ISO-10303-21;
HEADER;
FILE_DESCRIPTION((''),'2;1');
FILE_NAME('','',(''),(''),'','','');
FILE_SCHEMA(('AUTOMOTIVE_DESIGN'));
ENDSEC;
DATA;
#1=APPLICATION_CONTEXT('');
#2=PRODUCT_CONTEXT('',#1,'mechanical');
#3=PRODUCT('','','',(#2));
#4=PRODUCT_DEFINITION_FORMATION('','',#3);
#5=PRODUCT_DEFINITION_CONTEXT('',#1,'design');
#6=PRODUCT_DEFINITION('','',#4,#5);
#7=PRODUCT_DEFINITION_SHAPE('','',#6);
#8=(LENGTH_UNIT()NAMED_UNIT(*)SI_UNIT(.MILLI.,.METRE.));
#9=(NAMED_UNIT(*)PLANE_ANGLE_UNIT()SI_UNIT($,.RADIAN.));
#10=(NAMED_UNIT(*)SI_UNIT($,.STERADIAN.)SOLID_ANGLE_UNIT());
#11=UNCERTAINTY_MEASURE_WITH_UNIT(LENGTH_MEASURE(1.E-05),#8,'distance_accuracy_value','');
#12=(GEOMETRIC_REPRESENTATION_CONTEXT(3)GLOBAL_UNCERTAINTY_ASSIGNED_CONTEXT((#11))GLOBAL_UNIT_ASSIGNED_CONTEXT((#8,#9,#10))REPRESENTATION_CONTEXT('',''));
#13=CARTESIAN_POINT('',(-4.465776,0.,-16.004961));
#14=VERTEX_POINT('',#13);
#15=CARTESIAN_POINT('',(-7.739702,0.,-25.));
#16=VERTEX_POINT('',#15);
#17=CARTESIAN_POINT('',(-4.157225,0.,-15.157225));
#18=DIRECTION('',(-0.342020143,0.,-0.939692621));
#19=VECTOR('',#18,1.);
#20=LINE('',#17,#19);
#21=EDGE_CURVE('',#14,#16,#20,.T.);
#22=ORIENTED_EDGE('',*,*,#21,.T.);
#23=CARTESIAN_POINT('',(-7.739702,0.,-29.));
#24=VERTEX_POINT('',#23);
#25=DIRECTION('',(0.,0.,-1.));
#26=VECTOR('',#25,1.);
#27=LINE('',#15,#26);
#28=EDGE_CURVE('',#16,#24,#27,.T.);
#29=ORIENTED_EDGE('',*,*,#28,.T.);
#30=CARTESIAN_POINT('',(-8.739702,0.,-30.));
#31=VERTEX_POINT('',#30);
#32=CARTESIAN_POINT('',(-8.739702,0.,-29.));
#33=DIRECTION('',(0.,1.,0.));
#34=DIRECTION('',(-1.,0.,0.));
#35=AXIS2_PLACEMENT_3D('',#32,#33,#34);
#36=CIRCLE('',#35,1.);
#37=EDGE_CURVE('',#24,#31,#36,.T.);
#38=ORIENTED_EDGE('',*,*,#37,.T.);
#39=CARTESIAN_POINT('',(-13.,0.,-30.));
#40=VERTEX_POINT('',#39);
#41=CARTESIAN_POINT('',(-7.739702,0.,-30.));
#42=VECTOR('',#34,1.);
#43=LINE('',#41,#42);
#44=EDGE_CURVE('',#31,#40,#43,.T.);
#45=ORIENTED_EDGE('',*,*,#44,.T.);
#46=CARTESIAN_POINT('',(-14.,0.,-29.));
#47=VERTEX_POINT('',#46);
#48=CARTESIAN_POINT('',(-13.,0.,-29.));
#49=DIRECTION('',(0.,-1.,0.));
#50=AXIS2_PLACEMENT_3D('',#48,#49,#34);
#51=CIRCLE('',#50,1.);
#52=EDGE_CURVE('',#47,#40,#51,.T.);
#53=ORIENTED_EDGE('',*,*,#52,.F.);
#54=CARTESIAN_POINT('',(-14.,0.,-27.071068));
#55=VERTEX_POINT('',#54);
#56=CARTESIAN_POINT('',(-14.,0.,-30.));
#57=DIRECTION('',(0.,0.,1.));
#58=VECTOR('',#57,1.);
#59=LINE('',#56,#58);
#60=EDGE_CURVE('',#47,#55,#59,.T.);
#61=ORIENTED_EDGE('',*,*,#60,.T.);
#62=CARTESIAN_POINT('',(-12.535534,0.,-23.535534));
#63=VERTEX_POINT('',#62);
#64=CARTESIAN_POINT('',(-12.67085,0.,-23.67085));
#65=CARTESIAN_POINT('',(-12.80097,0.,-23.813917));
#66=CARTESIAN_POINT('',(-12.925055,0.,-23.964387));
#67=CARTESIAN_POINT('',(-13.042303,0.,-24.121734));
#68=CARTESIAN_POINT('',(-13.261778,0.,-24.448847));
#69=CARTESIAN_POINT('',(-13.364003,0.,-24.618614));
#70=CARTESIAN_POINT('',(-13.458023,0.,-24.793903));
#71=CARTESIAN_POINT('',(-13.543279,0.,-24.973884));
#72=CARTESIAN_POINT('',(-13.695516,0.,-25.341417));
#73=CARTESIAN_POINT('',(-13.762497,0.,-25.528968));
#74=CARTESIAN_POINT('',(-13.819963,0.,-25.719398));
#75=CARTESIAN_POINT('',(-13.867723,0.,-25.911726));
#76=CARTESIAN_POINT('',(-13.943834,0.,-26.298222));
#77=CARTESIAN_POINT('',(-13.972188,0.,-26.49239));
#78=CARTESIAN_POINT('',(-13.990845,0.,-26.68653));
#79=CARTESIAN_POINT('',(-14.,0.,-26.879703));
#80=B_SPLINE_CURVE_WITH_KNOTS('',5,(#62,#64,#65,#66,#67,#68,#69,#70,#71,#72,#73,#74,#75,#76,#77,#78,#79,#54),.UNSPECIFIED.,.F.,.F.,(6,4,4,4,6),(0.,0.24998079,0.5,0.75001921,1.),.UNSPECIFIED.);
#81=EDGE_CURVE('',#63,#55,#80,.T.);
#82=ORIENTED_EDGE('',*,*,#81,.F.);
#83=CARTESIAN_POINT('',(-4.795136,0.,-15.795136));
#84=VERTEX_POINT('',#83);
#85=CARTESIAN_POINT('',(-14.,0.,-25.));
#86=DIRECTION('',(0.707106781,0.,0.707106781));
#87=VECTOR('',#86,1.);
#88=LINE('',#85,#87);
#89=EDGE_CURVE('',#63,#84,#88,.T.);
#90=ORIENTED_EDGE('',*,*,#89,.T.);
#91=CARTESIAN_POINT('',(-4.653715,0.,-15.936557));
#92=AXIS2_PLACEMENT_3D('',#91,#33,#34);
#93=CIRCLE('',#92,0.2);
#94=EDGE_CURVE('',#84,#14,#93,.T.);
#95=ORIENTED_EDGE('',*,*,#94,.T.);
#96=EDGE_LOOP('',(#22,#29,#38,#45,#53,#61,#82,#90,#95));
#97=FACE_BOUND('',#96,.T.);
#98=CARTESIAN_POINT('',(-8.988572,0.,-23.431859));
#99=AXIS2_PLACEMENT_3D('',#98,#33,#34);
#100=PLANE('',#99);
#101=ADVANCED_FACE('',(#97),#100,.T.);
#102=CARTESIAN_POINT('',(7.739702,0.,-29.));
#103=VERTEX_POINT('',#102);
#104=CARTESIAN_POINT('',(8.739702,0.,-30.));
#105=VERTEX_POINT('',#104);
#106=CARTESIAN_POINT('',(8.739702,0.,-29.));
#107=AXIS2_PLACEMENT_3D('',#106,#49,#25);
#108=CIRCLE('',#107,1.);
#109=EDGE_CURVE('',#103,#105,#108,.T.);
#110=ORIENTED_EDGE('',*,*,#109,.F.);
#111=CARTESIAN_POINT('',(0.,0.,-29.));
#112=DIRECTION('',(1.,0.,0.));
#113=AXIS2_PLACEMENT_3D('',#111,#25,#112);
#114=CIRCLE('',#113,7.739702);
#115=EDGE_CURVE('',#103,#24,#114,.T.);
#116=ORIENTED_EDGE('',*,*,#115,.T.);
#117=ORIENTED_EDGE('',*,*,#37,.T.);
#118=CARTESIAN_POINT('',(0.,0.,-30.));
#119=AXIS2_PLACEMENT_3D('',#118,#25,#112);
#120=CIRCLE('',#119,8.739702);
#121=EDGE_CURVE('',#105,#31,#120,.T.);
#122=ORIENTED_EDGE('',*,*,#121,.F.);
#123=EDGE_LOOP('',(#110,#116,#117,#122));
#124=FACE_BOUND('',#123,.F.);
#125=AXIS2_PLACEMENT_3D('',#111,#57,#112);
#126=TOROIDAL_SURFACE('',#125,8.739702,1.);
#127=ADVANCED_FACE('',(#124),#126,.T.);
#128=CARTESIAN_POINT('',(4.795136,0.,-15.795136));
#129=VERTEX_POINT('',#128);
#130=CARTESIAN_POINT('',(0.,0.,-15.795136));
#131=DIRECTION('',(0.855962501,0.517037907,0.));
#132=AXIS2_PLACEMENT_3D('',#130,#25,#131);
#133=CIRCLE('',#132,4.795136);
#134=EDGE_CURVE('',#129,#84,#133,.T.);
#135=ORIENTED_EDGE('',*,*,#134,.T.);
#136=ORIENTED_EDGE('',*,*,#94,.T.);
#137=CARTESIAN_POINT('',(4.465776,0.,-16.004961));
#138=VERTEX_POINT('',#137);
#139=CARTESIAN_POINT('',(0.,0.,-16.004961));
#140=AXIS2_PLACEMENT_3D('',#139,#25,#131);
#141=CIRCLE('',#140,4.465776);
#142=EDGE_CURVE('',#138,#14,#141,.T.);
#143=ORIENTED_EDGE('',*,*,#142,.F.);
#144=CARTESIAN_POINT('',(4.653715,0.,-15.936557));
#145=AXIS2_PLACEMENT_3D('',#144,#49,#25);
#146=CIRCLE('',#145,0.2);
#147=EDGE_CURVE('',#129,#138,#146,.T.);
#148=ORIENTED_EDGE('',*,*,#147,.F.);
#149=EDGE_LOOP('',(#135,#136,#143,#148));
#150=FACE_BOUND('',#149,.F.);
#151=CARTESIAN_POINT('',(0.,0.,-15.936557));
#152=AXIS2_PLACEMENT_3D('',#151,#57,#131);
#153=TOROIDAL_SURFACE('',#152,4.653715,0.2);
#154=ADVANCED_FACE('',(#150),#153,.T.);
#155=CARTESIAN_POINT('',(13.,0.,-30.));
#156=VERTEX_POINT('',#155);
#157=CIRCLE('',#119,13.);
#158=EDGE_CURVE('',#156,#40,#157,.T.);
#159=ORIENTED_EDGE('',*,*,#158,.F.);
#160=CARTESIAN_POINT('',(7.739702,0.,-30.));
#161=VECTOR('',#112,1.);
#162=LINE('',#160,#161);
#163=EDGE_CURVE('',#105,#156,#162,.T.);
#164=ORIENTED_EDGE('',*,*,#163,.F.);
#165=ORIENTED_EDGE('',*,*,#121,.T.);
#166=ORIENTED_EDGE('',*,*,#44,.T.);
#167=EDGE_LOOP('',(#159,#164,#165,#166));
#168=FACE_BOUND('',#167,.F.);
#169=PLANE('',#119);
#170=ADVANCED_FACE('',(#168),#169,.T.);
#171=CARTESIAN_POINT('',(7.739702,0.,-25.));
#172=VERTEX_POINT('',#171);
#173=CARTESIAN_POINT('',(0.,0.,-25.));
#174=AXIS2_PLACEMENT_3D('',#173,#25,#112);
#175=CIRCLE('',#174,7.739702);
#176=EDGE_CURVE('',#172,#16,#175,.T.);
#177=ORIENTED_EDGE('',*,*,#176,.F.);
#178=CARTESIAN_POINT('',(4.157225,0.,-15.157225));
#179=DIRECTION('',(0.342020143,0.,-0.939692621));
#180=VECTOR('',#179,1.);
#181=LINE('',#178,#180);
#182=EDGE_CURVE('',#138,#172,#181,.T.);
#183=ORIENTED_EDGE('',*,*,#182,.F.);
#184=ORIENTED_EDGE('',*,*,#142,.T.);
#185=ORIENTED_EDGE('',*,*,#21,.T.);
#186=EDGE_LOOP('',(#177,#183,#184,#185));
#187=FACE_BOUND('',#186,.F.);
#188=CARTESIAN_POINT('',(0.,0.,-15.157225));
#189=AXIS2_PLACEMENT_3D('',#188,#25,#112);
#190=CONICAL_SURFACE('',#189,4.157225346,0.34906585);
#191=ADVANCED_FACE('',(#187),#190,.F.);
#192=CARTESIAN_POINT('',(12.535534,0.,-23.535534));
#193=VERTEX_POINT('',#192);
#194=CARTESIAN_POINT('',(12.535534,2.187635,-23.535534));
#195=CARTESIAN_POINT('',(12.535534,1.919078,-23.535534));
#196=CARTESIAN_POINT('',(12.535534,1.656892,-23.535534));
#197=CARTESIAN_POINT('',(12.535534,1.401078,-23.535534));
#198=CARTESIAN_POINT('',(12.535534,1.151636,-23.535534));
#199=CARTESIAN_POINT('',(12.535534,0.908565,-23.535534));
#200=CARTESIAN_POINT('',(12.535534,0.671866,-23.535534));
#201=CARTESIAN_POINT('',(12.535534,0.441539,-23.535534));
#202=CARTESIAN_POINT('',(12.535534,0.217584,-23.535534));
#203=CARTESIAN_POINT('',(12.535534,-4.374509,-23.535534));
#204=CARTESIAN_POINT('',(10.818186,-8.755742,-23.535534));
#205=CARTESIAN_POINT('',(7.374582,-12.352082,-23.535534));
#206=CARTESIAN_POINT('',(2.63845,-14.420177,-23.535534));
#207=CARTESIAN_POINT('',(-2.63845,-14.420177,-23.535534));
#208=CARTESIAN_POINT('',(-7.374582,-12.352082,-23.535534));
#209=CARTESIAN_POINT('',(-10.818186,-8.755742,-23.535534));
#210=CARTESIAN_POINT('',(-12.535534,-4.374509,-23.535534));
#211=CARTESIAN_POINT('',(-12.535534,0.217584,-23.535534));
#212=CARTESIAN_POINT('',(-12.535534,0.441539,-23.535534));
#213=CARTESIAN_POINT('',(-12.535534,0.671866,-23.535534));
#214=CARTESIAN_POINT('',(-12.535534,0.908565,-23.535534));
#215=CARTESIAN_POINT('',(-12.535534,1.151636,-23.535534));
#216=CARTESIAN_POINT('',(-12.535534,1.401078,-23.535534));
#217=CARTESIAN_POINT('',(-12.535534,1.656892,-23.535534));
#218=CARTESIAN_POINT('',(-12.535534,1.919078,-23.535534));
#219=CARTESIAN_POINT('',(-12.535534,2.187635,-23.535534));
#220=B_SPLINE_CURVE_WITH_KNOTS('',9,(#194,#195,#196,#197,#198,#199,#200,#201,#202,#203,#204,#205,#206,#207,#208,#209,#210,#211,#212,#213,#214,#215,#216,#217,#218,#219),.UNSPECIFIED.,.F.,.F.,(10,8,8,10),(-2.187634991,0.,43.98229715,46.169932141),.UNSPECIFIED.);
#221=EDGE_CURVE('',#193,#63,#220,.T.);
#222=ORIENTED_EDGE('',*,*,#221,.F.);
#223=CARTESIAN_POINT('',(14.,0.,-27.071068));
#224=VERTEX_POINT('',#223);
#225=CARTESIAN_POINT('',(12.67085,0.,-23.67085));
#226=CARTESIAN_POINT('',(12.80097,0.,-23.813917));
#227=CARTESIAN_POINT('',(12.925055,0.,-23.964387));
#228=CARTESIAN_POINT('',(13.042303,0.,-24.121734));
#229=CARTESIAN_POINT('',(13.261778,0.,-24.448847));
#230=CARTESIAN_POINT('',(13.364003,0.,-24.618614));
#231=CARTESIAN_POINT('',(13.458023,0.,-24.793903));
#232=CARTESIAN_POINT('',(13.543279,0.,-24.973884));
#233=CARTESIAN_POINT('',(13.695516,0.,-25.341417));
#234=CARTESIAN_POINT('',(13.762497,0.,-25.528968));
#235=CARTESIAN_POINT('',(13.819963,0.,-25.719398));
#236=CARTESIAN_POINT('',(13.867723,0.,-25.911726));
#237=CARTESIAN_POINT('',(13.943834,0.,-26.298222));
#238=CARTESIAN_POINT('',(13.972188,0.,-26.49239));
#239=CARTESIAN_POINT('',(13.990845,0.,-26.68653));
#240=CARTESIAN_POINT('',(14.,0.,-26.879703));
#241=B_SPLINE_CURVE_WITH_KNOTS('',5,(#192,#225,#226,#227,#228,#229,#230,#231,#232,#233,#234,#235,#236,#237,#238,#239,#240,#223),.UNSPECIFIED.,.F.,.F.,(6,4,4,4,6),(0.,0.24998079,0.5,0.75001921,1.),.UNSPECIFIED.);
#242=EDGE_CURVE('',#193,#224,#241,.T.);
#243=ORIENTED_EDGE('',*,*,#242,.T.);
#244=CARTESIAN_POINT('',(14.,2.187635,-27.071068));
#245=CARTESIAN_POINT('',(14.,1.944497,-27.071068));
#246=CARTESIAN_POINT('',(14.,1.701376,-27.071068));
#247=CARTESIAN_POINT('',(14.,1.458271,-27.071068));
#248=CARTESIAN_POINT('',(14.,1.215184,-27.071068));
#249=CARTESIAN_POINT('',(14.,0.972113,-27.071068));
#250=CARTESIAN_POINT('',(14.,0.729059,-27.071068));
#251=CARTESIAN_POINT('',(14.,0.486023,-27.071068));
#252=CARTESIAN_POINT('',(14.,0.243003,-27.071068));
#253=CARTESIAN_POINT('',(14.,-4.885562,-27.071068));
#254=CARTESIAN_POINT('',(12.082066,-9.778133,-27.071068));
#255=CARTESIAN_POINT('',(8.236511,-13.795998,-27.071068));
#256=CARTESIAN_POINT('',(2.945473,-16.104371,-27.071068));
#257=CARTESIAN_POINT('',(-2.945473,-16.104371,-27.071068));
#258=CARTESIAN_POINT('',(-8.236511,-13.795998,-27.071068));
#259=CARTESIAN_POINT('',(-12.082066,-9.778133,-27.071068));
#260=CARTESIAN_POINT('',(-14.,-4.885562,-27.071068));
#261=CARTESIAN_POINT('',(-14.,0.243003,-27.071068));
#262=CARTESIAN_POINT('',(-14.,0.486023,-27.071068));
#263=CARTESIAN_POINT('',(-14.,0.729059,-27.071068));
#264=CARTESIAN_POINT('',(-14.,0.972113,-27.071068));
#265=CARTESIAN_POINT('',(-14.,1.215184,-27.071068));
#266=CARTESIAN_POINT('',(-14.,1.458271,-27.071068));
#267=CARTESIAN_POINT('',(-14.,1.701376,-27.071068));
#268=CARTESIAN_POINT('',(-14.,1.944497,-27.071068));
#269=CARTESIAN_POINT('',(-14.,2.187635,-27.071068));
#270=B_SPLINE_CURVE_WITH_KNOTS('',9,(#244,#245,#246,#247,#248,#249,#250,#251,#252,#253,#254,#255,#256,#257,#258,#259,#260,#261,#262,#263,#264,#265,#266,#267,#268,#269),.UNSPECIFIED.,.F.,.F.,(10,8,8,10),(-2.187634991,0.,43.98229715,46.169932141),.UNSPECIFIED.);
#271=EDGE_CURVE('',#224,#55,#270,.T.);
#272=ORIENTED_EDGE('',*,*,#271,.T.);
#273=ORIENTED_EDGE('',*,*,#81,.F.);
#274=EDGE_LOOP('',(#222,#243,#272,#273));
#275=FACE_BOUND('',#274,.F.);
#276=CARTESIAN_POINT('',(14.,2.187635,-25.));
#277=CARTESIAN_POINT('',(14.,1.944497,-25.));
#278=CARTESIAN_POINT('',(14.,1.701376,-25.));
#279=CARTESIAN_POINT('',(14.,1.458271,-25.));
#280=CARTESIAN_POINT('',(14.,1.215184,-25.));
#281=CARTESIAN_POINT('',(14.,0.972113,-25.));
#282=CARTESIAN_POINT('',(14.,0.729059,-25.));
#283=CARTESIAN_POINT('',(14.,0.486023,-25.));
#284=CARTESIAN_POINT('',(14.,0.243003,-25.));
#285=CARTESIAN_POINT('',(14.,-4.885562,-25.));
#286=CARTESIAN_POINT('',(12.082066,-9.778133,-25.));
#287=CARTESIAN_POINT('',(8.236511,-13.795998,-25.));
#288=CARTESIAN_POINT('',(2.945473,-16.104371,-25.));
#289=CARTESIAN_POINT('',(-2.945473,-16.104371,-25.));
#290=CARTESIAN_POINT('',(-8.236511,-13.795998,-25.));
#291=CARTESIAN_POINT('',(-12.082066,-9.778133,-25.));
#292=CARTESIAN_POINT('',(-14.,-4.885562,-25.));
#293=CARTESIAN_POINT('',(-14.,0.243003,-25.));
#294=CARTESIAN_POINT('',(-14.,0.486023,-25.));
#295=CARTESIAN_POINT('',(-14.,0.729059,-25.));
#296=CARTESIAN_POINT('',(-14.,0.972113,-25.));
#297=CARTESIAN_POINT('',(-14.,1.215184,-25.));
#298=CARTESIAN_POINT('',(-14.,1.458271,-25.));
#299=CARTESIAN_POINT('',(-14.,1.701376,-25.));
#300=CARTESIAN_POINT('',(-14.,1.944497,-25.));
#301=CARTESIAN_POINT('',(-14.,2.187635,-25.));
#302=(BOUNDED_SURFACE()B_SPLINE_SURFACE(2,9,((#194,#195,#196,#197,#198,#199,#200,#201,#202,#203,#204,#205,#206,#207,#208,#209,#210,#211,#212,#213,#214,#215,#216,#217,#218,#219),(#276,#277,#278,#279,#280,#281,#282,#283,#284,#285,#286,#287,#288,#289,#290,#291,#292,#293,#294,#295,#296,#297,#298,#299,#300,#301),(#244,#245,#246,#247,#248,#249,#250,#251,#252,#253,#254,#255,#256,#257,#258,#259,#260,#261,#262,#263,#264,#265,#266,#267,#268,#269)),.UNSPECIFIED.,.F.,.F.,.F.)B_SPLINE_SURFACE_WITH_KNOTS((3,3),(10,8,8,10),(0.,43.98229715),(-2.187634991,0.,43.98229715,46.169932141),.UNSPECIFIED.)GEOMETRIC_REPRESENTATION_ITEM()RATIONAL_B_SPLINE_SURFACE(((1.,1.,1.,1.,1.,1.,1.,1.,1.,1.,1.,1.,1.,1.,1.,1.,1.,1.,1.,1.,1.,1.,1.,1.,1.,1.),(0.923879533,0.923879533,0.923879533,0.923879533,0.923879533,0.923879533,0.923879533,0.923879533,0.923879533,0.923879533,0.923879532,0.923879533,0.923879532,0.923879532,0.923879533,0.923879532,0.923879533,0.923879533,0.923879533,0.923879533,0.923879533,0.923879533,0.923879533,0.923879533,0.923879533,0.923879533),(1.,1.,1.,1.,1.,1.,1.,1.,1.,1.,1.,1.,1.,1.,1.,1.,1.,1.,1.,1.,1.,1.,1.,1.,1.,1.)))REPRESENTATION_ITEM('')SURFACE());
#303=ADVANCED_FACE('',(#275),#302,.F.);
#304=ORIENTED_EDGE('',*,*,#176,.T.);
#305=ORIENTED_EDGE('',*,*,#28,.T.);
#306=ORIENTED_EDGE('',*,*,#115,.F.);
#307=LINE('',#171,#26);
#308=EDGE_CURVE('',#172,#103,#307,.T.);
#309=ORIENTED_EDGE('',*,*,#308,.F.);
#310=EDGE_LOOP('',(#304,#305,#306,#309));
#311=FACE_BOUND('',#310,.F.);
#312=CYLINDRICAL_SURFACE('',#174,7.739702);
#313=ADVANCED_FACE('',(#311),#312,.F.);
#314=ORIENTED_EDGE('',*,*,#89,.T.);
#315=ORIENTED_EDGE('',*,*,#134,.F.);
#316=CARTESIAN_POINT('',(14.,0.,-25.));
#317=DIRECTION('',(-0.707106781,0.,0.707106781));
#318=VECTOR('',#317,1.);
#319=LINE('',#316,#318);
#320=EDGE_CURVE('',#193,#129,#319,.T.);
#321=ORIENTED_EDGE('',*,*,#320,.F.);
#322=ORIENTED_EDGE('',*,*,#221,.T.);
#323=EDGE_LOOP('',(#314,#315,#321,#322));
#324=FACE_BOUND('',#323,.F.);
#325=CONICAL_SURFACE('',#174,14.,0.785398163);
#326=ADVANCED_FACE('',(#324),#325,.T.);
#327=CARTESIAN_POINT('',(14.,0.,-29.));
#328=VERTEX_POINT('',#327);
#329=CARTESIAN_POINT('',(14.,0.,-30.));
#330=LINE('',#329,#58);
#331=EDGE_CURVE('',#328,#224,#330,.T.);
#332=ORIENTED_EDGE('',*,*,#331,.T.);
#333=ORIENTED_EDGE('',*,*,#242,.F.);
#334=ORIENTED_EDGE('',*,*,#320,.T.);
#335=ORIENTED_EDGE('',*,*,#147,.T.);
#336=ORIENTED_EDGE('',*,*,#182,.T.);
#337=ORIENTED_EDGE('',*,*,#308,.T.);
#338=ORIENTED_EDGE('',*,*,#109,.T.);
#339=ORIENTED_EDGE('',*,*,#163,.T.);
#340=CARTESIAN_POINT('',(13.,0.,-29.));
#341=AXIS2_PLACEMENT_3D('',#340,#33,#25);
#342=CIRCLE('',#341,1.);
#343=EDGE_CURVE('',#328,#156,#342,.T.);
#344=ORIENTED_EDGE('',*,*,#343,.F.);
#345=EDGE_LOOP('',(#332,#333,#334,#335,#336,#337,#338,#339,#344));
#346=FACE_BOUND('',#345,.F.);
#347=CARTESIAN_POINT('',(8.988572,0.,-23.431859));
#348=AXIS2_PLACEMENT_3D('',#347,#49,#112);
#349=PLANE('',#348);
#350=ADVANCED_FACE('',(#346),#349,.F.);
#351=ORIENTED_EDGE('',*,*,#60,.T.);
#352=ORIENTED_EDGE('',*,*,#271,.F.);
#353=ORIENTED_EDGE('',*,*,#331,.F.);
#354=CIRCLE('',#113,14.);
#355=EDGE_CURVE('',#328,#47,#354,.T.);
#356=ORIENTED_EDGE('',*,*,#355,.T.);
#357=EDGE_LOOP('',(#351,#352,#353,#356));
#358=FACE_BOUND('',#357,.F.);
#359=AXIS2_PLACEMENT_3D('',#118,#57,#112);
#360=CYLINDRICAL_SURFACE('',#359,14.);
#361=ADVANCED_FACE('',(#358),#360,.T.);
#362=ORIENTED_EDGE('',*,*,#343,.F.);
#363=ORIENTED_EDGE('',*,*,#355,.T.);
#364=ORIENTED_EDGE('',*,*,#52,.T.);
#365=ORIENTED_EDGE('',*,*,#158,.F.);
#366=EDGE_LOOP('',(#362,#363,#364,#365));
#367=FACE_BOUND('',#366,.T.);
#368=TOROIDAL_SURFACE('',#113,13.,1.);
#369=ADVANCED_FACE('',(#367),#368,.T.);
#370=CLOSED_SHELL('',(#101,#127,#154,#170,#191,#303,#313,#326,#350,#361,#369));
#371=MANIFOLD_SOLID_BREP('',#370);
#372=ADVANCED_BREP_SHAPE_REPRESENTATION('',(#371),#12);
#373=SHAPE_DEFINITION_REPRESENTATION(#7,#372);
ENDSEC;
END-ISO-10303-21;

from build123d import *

# Parameters (mm, degrees)
F1_ANGLE    = 180
F2_R        = 5
F3_R        = 1
F4_T2_ANGLE = 242.2675380927


# Not quite as in the source:
# - a fillet or chamfer that OpenCascade refuses, or shapes differently, is made with other operations: its cross-section is extruded or revolved along the edge and cut away or added


with BuildPart() as f1:
    # F0 (on Front) → F1 (revolve)
    with BuildSketch(Plane.XZ):
        Polygon((14, -25), (4.157225346, -15.157225346), (7.7397023427, -25), (7.7397023427, -30), (14, -30), align=None)
    revolve(axis=Axis((0, 0, 0), (0, 0, -1)), revolution_arc=F1_ANGLE)

    # F2
    f2_edges = [f1.edges().sort_by_distance(p)[0] for p in [
        (0, -14, -25),
    ]]
    fillet(f2_edges, radius=F2_R)

    # F3
    f3_edges = [f1.edges().sort_by_distance(p)[0] for p in [
        (0, -14, -30),
        (0, -7.739702, -30),
    ]]
    fillet(f3_edges, radius=F3_R)

    # F4: fillet of radius 0.2 on 1 edges, made by hand

    # F4_s1 → F4_t2 (revolve, cut)
    with BuildSketch(Plane(origin=(0, 0, 0), x_dir=(0, 0, 1), z_dir=(-0.5170379067, 0.8559625009, 0))):
        with BuildLine():
            ThreePointArc((-15.7951358602, 4.7951358602), (-15.7678789273, 4.5462545823), (-16.0049612451, 4.4657759798))
            Line((-16.0049612451, 4.4657759798), (-15.157225346, 4.157225346))
            Line((-15.157225346, 4.157225346), (-15.7951358602, 4.7951358602))
        make_face()
    revolve(axis=Axis((0, 0, -15.157225346), (0, 0, -1)), revolution_arc=F4_T2_ANGLE, mode=Mode.SUBTRACT)


solid = f1.part
